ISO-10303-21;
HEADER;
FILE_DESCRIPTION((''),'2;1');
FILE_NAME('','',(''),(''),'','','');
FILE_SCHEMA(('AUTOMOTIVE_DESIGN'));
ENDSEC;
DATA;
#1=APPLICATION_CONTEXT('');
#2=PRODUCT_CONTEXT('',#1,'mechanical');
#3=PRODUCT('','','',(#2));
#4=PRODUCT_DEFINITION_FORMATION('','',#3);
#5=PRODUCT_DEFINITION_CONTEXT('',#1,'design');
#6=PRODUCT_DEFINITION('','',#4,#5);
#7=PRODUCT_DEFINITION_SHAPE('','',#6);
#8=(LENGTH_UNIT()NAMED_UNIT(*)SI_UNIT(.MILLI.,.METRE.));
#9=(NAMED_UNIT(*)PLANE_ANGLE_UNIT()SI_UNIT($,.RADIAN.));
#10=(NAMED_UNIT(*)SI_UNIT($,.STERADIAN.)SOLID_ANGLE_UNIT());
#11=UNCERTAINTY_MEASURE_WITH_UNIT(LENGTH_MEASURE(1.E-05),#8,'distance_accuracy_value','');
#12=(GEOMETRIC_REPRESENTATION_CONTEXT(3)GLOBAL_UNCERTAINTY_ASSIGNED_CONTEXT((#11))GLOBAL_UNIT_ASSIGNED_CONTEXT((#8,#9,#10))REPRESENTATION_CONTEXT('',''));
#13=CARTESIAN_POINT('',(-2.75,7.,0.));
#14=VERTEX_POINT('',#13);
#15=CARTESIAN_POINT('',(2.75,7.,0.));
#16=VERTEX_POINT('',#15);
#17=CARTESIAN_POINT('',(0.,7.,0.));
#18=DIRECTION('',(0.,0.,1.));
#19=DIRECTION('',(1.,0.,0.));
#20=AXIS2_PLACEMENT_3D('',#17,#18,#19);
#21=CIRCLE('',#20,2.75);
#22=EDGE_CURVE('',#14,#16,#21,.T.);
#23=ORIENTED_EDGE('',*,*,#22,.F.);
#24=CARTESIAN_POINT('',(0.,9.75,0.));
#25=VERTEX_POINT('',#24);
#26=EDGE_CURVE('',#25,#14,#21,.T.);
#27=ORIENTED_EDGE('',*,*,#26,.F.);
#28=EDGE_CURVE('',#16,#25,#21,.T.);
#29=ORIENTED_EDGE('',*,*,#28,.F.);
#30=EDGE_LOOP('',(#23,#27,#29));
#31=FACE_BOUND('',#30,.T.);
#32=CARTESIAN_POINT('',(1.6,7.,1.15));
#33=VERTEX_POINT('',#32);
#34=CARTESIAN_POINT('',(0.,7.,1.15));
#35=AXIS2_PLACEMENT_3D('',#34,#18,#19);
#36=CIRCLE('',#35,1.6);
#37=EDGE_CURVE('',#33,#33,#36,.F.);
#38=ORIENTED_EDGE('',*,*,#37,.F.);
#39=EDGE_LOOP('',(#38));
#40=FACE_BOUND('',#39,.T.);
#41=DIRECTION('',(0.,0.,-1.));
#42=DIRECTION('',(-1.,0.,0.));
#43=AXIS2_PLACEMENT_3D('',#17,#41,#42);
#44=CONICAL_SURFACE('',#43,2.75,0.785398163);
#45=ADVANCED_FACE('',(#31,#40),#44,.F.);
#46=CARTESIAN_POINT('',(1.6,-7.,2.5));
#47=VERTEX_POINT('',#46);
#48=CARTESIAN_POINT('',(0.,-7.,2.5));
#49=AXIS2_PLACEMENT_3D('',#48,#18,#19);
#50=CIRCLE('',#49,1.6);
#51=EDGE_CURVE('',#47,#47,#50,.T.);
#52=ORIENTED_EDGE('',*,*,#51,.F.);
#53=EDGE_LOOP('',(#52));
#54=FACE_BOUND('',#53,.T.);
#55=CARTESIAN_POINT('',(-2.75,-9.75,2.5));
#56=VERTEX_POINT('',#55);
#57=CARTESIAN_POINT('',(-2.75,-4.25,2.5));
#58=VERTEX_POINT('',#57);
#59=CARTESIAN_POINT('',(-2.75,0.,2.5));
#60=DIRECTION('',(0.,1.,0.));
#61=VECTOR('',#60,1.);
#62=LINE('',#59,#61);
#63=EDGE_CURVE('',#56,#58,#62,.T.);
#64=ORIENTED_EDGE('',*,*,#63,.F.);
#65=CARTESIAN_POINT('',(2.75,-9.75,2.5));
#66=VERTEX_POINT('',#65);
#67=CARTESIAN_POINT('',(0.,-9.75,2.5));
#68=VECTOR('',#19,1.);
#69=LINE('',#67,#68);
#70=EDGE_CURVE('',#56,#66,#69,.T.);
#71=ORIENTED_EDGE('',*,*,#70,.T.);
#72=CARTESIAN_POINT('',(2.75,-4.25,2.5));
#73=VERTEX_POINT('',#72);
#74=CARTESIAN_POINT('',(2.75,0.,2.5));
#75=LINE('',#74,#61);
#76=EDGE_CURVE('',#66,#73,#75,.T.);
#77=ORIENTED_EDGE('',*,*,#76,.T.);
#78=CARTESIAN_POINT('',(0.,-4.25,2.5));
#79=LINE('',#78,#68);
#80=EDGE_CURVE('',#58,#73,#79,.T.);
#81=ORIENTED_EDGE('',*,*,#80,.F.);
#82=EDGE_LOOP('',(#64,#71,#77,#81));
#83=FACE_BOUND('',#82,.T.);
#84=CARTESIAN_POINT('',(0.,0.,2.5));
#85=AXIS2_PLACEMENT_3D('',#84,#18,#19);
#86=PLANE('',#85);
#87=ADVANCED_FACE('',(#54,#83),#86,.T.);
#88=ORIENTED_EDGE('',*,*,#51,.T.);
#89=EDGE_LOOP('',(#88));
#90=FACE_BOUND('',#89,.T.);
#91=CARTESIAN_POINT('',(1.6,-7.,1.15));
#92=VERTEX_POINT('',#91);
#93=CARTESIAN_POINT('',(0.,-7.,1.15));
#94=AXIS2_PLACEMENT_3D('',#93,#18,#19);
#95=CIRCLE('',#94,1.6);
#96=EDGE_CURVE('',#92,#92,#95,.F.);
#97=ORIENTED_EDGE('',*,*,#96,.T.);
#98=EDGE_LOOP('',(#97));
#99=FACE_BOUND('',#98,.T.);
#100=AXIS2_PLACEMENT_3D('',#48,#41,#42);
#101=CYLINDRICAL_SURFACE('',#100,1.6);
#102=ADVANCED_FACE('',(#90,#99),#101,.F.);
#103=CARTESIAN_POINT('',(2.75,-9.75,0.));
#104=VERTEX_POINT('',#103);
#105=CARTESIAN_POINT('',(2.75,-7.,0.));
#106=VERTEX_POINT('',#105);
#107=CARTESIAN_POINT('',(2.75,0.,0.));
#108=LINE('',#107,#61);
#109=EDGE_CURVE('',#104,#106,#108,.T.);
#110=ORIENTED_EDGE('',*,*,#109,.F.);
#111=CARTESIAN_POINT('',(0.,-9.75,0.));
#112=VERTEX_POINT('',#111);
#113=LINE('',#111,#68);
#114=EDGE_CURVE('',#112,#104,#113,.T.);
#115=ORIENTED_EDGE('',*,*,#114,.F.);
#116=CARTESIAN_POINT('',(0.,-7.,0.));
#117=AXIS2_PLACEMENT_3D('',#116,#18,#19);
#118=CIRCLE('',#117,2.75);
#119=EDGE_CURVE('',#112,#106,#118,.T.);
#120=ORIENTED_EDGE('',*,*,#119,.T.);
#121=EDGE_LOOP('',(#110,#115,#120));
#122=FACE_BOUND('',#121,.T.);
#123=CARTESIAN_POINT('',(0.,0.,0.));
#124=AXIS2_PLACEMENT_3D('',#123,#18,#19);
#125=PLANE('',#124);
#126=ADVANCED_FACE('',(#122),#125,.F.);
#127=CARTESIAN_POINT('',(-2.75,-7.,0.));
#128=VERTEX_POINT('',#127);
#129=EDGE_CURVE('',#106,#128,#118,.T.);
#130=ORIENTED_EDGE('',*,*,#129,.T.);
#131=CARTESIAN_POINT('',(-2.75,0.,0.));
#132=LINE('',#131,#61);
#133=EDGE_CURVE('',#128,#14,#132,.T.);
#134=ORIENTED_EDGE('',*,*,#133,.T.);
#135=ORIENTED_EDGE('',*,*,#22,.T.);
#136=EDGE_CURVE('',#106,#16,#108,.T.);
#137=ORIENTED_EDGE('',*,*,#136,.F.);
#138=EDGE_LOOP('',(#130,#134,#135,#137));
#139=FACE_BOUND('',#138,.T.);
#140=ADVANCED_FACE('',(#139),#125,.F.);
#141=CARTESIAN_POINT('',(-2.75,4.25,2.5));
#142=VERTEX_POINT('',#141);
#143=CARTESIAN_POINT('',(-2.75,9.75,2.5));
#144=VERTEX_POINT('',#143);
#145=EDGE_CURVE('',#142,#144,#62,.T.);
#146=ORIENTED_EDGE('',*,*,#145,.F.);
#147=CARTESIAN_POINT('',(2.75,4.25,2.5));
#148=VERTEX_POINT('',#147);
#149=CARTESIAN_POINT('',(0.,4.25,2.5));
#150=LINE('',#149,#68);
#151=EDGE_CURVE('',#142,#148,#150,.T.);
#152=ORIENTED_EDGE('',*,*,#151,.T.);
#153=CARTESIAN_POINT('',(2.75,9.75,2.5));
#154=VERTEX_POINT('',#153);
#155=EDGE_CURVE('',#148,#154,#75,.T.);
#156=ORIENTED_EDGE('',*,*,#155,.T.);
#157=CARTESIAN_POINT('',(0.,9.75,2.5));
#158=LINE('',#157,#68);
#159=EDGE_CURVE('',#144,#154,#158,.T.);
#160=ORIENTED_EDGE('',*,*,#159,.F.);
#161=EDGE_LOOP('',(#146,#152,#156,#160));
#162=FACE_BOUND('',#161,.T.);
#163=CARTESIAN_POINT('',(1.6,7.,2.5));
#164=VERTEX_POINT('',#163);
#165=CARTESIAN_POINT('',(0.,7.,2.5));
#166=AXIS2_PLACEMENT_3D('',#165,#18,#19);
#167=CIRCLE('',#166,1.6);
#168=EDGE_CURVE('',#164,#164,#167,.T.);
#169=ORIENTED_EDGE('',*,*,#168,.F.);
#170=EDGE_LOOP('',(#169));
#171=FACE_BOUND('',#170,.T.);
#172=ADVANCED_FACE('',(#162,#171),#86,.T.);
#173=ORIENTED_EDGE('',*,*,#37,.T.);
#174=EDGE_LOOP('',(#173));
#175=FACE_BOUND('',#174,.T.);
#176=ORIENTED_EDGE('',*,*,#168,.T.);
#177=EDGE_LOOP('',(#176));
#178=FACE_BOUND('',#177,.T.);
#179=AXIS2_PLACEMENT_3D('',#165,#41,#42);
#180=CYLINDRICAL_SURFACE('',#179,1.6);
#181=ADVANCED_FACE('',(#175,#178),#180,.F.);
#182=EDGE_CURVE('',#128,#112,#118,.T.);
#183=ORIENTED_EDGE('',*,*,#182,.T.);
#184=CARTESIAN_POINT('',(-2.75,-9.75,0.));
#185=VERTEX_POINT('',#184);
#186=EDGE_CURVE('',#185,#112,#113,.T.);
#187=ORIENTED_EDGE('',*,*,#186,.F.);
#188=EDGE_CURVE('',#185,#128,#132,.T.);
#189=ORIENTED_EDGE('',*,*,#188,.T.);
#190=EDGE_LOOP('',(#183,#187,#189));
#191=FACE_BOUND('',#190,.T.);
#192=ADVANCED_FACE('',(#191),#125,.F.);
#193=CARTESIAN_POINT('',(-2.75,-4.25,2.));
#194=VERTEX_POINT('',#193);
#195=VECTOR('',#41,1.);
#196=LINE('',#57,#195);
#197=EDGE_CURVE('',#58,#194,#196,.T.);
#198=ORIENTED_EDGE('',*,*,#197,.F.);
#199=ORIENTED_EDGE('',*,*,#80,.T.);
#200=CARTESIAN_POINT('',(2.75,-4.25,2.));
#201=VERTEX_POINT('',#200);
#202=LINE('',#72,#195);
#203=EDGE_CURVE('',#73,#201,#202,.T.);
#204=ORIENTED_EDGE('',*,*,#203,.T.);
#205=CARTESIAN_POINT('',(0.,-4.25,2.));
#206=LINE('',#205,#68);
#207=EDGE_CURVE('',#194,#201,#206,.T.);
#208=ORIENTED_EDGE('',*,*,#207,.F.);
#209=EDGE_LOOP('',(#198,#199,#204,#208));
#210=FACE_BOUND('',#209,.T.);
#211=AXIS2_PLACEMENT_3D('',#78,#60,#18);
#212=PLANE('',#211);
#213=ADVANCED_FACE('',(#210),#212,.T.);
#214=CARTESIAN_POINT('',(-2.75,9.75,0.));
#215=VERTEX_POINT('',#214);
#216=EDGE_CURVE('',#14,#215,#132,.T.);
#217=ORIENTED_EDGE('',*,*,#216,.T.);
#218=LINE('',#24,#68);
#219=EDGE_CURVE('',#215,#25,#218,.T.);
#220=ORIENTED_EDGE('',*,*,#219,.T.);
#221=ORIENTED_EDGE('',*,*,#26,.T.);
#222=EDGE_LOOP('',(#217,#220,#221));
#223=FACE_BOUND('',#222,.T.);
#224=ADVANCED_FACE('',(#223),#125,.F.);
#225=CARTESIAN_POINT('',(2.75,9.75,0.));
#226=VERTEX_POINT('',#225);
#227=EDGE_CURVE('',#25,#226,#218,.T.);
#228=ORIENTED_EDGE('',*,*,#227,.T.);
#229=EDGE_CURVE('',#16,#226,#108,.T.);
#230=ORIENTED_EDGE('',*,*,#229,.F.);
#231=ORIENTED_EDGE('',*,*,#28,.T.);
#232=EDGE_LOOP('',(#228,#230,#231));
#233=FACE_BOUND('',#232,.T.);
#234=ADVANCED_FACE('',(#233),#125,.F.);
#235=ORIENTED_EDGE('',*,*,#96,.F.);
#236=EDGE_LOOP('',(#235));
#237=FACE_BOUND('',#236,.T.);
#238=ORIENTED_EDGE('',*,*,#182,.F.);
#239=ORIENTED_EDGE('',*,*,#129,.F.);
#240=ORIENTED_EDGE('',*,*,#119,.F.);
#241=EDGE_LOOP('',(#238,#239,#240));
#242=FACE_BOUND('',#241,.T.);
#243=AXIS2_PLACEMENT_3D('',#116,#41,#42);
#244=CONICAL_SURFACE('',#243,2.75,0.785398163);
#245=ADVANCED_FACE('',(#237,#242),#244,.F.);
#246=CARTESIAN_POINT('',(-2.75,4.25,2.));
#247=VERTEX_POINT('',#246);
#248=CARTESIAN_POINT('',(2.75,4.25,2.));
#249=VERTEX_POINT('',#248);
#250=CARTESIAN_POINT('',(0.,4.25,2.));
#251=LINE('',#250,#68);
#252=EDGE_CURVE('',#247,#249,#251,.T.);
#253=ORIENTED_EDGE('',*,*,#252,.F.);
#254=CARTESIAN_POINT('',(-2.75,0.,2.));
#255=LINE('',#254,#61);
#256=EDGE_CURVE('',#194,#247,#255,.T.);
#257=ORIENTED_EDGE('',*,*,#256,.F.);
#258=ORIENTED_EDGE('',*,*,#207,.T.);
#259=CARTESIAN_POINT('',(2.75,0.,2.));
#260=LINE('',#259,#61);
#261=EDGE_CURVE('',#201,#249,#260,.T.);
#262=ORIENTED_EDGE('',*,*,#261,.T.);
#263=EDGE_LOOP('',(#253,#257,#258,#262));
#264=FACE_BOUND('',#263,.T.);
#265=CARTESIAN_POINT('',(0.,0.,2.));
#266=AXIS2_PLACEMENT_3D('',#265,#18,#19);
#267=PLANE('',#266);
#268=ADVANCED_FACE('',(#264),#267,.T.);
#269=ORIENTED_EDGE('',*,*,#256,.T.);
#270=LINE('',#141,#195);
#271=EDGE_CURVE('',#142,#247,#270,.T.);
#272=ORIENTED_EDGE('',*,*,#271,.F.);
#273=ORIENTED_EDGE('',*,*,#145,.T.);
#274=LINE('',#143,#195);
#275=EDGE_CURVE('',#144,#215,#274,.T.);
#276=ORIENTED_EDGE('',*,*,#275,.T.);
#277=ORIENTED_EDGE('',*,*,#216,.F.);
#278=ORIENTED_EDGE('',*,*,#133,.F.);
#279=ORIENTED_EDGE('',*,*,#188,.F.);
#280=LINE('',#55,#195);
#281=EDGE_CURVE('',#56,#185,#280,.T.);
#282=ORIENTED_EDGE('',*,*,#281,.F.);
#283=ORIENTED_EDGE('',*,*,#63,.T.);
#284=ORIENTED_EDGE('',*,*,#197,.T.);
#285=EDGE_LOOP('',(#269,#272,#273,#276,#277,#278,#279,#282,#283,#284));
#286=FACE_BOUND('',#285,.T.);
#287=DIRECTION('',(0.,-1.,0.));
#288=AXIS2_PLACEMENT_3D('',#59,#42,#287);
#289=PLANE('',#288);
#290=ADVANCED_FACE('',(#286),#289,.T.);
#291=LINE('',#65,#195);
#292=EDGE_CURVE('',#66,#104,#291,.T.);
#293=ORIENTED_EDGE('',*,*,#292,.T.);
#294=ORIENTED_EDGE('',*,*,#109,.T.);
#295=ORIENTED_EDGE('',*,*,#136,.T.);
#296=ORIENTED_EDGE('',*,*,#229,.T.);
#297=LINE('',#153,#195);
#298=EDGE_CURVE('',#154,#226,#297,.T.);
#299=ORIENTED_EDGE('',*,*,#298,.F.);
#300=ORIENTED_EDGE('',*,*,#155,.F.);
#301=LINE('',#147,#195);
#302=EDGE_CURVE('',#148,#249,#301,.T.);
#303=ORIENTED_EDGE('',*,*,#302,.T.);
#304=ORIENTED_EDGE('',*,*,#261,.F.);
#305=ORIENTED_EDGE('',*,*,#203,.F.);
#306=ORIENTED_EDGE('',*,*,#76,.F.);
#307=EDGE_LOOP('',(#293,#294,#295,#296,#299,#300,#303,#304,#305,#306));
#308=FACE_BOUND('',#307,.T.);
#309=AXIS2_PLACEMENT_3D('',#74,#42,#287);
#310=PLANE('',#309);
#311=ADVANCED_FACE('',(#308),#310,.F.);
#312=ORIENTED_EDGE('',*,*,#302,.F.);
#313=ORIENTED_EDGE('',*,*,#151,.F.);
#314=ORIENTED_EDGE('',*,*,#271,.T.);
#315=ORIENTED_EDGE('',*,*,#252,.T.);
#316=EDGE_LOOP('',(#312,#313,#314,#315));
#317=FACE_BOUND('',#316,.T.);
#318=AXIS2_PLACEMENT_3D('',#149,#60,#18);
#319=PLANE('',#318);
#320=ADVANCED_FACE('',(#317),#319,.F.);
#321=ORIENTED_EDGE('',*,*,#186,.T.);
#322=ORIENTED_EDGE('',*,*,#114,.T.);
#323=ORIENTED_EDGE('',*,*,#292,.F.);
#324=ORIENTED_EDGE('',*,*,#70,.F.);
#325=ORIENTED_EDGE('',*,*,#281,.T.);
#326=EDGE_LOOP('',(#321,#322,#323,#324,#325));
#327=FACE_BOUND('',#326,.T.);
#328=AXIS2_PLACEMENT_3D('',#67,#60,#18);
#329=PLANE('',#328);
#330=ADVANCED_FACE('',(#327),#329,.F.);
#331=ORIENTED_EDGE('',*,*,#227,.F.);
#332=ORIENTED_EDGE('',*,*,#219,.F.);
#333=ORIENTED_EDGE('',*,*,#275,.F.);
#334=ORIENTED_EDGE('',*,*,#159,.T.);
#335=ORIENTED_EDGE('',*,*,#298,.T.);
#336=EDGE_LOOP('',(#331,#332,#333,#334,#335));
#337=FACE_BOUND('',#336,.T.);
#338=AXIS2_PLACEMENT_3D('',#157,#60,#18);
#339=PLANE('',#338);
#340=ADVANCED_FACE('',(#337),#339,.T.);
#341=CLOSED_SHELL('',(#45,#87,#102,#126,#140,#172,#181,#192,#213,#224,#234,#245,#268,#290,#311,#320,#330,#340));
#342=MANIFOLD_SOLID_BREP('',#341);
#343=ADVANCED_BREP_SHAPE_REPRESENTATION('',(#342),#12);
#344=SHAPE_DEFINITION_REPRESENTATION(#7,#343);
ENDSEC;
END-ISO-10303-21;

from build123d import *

# Parameters (mm, degrees)
SKETCH1_W             = 5.5
SKETCH1_H             = 5.5
SKETCH1_R             = 1.6
BOSS_EXTRUDE1_DEPTH   = 2.5
BOSS_EXTRUDE1_2_DEPTH = 2.5
SKETCH1_4_W           = 8.5
SKETCH1_4_H           = 2.75
BOSS_EXTRUDE2_DEPTH   = 2
CHAMFER1_SIZE         = 1.15


with BuildPart() as part:
    # Sketch1 → Boss-Extrude1 (new body)
    with BuildSketch(Plane(origin=(0, 0, 0), x_dir=(0, 1, 0), z_dir=(0, 0, 1))):
        with Locations((-7, 0)):
            Rectangle(SKETCH1_W, SKETCH1_H)
        with Locations(Location((-7, 0, 0), (0, 0, 270))):
            Circle(SKETCH1_R, mode=Mode.SUBTRACT)
    extrude(amount=BOSS_EXTRUDE1_DEPTH)



with BuildPart() as body_2:
    # Sketch1 → Boss-Extrude1 2 (new body)
    with BuildSketch(Plane(origin=(0, 0, 0), x_dir=(0, 1, 0), z_dir=(0, 0, 1))):
        with Locations((7, 0)):
            Rectangle(SKETCH1_W, SKETCH1_H)
        with Locations(Location((7, 0, 0), (0, 0, 270))):
            Circle(SKETCH1_R, mode=Mode.SUBTRACT)
    extrude(amount=BOSS_EXTRUDE1_2_DEPTH)


with BuildPart() as part_1:
    add(part.part)

    add(body_2.part)  # Boss-Extrude2 merges body 2
    # Sketch1<4> → Boss-Extrude2 (add)
    with BuildSketch(Plane(origin=(0, 0, 0), x_dir=(0, 1, 0), z_dir=(0, 0, 1))):
        with Locations((0, -1.375)):
            Rectangle(SKETCH1_4_W, SKETCH1_4_H)
        with Locations((0, 1.375)):
            Rectangle(SKETCH1_4_W, SKETCH1_4_H)
    extrude(amount=BOSS_EXTRUDE2_DEPTH)

    # Chamfer1
    chamfer1_edges = [part_1.edges().sort_by_distance(p)[0] for p in [
        (-1.6, 7, 0),
        (-1.6, -7, 0),
    ]]
    chamfer(chamfer1_edges, length=CHAMFER1_SIZE - 0.0001)  # a hair under: the kernel refuses the full size


solid = part_1.part
